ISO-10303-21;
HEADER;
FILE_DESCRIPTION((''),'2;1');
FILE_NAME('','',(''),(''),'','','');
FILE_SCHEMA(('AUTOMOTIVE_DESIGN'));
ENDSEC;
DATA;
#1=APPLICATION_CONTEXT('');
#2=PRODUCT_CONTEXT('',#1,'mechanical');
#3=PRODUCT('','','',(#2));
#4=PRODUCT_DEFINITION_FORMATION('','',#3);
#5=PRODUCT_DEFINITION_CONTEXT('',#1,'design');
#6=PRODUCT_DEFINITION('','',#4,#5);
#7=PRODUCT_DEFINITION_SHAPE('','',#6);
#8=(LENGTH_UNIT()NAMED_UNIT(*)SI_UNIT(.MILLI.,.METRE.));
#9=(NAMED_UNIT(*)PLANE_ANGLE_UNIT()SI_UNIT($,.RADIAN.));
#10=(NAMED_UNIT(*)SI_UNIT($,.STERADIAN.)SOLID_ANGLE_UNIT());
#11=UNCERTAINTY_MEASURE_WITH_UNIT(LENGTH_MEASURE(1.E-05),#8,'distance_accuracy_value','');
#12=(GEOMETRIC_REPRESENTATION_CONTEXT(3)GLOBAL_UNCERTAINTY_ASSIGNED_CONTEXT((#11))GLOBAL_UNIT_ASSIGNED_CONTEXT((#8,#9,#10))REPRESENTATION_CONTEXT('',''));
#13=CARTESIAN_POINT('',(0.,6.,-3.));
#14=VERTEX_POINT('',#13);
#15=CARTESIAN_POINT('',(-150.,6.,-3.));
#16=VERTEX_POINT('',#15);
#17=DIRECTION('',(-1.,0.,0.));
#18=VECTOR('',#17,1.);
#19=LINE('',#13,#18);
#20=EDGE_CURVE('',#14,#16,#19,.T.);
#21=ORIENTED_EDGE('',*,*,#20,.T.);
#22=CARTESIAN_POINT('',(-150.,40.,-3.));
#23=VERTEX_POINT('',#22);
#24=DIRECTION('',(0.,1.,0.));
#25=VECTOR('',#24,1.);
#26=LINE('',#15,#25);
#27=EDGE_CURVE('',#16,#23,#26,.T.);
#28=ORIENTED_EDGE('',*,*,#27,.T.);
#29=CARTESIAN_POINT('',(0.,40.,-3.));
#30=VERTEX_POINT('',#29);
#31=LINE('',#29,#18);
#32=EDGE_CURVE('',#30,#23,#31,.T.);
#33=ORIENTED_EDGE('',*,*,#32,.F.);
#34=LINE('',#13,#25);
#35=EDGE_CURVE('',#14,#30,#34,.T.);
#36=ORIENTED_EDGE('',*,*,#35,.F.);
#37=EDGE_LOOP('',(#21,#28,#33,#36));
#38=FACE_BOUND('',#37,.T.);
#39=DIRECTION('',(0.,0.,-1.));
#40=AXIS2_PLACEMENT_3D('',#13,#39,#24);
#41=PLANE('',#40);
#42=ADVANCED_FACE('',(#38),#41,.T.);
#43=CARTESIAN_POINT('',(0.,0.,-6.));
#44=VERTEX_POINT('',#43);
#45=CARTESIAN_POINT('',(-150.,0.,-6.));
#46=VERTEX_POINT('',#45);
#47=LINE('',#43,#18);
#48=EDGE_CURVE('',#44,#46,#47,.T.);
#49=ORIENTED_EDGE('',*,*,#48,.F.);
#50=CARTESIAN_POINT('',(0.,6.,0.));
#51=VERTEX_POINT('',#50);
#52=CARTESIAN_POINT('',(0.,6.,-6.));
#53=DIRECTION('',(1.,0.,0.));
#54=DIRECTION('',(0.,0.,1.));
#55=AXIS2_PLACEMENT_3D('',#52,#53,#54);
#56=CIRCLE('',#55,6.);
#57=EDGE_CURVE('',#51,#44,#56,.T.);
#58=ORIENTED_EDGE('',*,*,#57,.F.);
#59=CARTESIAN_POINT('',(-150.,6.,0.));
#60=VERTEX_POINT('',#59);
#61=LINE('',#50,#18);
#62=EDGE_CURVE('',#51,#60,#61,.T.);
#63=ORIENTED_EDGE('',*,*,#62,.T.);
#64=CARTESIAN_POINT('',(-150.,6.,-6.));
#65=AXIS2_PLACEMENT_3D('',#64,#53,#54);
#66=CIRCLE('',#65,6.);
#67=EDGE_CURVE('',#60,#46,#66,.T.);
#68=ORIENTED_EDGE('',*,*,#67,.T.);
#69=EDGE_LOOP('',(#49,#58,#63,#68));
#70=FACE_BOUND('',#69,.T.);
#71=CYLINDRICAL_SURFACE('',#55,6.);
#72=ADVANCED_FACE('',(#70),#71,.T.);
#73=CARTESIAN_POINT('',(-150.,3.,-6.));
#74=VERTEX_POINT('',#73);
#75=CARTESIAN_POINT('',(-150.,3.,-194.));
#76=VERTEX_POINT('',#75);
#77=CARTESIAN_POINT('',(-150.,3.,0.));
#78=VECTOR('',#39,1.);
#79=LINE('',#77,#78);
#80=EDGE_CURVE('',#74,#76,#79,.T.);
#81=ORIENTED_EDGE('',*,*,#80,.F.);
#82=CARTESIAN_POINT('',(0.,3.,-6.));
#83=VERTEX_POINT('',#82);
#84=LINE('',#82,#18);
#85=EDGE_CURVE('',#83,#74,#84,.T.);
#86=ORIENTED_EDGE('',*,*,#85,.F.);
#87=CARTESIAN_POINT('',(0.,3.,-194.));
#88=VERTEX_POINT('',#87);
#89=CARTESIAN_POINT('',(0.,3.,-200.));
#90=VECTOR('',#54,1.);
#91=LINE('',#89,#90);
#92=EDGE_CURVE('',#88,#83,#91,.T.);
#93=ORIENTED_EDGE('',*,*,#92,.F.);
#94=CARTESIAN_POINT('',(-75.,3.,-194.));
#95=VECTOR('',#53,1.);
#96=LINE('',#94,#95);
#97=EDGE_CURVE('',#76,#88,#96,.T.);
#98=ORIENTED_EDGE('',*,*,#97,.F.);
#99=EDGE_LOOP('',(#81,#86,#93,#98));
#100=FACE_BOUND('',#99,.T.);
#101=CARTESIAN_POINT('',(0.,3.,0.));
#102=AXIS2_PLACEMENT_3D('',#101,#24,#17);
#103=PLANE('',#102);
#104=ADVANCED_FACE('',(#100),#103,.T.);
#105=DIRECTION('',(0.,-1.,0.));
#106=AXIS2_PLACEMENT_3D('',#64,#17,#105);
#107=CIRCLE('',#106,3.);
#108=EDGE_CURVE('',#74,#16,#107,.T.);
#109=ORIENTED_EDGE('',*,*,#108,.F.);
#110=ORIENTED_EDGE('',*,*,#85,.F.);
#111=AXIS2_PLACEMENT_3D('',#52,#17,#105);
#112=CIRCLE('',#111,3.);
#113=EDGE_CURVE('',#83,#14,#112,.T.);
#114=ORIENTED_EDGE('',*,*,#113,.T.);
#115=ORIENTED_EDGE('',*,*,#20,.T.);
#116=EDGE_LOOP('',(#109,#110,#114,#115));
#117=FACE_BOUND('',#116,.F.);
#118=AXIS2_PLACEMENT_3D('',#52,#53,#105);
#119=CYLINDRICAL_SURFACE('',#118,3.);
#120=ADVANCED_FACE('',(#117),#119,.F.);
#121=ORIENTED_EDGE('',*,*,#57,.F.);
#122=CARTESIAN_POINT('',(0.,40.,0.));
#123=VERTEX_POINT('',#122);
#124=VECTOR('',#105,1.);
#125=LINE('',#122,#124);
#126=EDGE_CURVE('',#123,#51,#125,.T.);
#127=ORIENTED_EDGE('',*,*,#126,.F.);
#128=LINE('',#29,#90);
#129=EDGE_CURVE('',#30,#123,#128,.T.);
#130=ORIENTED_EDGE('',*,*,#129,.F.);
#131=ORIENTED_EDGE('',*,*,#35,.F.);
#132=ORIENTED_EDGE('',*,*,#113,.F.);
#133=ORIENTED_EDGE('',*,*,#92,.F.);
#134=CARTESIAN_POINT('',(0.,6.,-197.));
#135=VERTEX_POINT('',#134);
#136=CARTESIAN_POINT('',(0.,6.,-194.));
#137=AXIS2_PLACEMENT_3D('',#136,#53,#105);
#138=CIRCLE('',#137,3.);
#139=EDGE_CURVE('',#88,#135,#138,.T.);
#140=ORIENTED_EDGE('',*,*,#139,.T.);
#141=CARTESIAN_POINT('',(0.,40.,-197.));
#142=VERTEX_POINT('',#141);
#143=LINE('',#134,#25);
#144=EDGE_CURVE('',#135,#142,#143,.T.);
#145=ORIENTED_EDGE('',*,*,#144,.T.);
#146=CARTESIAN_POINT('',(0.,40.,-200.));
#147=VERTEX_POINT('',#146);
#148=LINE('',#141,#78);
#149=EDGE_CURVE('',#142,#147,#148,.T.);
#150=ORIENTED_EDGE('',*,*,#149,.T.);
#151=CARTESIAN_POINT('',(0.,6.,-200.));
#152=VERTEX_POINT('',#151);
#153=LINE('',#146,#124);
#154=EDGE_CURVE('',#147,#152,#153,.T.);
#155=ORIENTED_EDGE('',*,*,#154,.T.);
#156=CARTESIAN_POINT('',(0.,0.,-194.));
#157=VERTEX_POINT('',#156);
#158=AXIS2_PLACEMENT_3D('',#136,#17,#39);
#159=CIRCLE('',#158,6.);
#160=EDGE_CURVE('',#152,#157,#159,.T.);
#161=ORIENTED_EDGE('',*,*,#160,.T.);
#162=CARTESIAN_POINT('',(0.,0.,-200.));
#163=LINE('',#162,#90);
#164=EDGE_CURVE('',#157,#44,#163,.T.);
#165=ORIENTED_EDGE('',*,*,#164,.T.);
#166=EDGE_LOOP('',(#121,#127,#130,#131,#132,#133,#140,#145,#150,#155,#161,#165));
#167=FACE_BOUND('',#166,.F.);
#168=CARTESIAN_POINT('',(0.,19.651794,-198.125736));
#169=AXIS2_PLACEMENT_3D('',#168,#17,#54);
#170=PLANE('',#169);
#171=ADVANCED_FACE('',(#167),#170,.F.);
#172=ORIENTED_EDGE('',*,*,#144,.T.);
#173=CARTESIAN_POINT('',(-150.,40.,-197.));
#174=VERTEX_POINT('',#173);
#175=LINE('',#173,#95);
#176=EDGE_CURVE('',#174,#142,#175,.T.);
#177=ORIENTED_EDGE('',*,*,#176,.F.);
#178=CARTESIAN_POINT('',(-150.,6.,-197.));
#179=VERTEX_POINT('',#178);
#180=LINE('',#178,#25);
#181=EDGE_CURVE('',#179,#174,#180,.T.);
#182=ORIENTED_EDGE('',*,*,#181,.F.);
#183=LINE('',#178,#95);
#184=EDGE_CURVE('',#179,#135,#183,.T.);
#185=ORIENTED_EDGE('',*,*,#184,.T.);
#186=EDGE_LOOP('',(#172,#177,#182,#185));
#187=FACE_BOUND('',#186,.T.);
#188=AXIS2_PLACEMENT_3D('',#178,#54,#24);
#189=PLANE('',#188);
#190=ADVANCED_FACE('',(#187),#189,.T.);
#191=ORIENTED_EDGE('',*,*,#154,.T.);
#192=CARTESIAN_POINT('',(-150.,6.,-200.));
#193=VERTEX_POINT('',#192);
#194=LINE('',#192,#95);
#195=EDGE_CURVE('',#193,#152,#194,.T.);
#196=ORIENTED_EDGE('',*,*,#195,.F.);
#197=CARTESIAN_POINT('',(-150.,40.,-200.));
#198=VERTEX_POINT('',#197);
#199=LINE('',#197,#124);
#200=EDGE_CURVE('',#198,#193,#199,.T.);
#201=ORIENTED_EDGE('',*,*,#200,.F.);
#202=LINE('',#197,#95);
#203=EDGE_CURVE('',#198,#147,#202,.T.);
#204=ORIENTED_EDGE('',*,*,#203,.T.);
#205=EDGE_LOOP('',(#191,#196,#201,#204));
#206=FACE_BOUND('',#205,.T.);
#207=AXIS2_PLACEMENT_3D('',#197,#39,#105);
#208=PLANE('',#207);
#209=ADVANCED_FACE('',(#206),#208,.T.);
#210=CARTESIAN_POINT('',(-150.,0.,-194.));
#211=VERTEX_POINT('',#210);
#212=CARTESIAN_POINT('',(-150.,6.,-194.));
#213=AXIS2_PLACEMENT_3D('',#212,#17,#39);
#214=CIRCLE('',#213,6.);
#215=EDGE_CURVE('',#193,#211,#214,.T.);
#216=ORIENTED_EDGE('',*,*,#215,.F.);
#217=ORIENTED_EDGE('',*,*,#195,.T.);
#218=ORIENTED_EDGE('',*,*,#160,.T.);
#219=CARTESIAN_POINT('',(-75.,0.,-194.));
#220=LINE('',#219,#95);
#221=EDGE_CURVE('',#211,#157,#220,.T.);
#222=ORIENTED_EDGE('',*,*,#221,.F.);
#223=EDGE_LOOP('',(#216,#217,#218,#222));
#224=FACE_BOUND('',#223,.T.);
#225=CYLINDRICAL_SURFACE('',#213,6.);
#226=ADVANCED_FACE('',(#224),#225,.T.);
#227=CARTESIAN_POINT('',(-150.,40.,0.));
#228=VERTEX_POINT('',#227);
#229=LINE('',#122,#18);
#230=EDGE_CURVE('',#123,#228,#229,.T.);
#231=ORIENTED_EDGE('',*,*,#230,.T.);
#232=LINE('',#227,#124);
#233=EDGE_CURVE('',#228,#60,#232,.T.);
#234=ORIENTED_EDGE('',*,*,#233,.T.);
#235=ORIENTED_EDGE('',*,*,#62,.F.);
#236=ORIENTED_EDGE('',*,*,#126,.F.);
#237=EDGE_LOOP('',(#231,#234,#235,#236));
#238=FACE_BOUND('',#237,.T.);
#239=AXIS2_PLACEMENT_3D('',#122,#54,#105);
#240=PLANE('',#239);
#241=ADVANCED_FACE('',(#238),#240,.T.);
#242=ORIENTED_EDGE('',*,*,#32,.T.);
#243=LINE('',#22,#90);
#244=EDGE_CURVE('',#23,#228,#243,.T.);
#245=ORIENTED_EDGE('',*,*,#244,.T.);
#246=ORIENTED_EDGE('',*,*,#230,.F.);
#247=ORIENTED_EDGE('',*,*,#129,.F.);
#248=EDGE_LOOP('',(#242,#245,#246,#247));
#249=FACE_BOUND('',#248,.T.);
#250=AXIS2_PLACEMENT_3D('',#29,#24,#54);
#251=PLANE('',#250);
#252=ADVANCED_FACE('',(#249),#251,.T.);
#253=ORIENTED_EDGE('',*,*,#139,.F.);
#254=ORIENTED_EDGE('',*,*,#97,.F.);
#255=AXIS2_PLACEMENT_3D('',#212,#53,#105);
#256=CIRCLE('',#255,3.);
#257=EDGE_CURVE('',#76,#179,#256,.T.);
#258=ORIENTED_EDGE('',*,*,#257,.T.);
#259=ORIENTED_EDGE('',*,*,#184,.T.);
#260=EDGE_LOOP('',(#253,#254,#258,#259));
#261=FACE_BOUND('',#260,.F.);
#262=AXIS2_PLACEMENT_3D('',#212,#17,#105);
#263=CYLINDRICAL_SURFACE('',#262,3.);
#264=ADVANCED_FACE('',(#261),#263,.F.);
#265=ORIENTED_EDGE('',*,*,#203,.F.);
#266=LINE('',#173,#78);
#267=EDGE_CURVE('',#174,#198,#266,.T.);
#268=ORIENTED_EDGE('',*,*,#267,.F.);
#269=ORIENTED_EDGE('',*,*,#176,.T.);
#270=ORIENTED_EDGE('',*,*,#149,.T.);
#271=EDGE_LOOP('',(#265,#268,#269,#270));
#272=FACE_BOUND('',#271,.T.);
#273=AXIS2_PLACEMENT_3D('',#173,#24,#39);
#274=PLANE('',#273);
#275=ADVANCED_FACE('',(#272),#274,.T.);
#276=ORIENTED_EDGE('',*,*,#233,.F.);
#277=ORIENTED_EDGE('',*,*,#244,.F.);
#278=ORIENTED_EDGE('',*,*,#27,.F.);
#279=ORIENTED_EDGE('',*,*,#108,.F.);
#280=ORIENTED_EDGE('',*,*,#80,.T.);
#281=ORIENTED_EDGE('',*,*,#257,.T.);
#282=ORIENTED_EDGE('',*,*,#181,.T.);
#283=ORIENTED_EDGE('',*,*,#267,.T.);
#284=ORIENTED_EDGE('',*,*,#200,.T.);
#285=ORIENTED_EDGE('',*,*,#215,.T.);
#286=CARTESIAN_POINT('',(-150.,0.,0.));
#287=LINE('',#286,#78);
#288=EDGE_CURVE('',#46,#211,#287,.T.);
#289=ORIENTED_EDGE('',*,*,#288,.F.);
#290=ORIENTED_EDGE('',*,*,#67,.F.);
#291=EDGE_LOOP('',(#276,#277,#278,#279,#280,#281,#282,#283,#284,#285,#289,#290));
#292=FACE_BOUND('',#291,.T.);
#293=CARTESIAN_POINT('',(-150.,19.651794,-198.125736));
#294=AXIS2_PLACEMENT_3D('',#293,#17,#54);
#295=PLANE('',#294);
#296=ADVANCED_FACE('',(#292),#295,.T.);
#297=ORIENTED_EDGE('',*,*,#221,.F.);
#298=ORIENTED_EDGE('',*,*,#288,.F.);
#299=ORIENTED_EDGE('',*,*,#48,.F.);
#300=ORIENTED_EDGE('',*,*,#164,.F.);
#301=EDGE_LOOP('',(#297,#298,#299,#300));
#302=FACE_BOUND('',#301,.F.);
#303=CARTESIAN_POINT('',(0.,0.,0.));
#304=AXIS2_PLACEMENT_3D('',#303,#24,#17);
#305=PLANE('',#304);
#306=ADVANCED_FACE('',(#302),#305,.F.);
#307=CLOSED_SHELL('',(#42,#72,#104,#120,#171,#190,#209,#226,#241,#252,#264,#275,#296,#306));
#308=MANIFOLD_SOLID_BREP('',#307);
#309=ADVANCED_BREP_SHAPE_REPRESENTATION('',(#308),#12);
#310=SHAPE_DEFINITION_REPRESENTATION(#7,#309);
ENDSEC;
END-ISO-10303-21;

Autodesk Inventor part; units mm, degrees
ref_plane "YZ Plane" through (0, 0, 0) normal (1, 0, 0) x (0, 1, 0)
ref_plane "XZ Plane" through (0, 0, 0) normal (0, 1, 0) x (-1, 0, 0)
ref_plane "XY Plane" through (0, 0, 0) normal (0, 0, 1) x (1, 0, 0)
sketch "Sketch1" plane through (0, 0, 0) normal (0, 1, 0) x (-1, 0, 0)
  line L0 (0, 0) -> (150, 0)
  line L1 (150, 0) -> (150, -200)
  line L2 (150, -200) -> (0, -200)
  line L3 (0, -200) -> (0, 0)
  dimension "d0" = 200
  dimension "d1" = 150
extrude "Plate1" add sketch "Sketch1" along normal blind 3
sketch "Sketch2" plane through (0, 0, -3) normal (0, 0, 1) x (1, 0, 0)
  line L0 (-150, 0) -> (0, 0)
  line L1 (0, 0) -> (0, 40)
  line L2 (0, 40) -> (-150, 40)
  line L3 (-150, 40) -> (-150, 0)
edge flange "Flange1" height 40 angle 90 thickness 3 bend radius 3 thickness toward (0, 0, 1) relief tear relief width 3 relief depth 1.5 edges at (-75, 3, 0) wall of the first edge with corners at (-150, 0, -3) (0, 0, -3) (0, 40, -3) (-150, 40, -3)
bend "Bend1"
corner "Corner1"
sketch "Sketch3" plane through (-150, 0, -197) normal (0, 0, -1) x (-1, 0, 0)
  line L0 (-150, 0) -> (0, 0)
  line L1 (0, 0) -> (0, 40)
  line L2 (0, 40) -> (-150, 40)
  line L3 (-150, 40) -> (-150, 0)
edge flange "Flange2" height 40 angle 90 thickness 3 bend radius 3 thickness toward (0, 0, -1) relief tear relief width 3 relief depth 1.5 edges at (-75, 3, -200) wall of the first edge with corners at (0, 0, -197) (-150, 0, -197) (-150, 40, -197) (0, 40, -197)
bend "Bend2"
corner "Corner2"
equation "\"d2\" = Thickness"
equation "\"d3\" = BendReliefWidth"
equation "\"d4\" = BendReliefDepth"
equation "\"d5\" = MinimumRemnant"
equation "\"d6\" = TransitionRadius"
equation "\"d9\" = BendRadius"
equation "\"d10\" = CornerReliefSize"
equation "\"d11\" = GapSize"
equation "\"d12\" = JacobiRadiusSize"
equation "\"d13\" = BendReliefWidth"
equation "\"d14\" = BendReliefDepth"
equation "\"d15\" = MinimumRemnant"
equation "\"d16\" = TransitionRadius"
equation "\"d19\" = BendRadius"
equation "\"d20\" = CornerReliefSize"
equation "\"d21\" = GapSize"
equation "\"d22\" = JacobiRadiusSize"
equation "\"BendRadius\" = Thickness"
equation "\"BendReliefWidth\" = Thickness"
equation "\"BendReliefDepth\" = 0.5 * Thickness"
equation "\"CornerReliefSize\" = 4 * Thickness"
equation "\"MinimumRemnant\" = 2 * Thickness"
equation "\"TransitionRadius\" = BendRadius"
equation "\"JacobiRadiusSize\" = BendRadius"
equation "\"GapSize\" = Thickness"
equation "\"Thickness\" = 3"
properties part number "floor" material "Aluminum 6061"
